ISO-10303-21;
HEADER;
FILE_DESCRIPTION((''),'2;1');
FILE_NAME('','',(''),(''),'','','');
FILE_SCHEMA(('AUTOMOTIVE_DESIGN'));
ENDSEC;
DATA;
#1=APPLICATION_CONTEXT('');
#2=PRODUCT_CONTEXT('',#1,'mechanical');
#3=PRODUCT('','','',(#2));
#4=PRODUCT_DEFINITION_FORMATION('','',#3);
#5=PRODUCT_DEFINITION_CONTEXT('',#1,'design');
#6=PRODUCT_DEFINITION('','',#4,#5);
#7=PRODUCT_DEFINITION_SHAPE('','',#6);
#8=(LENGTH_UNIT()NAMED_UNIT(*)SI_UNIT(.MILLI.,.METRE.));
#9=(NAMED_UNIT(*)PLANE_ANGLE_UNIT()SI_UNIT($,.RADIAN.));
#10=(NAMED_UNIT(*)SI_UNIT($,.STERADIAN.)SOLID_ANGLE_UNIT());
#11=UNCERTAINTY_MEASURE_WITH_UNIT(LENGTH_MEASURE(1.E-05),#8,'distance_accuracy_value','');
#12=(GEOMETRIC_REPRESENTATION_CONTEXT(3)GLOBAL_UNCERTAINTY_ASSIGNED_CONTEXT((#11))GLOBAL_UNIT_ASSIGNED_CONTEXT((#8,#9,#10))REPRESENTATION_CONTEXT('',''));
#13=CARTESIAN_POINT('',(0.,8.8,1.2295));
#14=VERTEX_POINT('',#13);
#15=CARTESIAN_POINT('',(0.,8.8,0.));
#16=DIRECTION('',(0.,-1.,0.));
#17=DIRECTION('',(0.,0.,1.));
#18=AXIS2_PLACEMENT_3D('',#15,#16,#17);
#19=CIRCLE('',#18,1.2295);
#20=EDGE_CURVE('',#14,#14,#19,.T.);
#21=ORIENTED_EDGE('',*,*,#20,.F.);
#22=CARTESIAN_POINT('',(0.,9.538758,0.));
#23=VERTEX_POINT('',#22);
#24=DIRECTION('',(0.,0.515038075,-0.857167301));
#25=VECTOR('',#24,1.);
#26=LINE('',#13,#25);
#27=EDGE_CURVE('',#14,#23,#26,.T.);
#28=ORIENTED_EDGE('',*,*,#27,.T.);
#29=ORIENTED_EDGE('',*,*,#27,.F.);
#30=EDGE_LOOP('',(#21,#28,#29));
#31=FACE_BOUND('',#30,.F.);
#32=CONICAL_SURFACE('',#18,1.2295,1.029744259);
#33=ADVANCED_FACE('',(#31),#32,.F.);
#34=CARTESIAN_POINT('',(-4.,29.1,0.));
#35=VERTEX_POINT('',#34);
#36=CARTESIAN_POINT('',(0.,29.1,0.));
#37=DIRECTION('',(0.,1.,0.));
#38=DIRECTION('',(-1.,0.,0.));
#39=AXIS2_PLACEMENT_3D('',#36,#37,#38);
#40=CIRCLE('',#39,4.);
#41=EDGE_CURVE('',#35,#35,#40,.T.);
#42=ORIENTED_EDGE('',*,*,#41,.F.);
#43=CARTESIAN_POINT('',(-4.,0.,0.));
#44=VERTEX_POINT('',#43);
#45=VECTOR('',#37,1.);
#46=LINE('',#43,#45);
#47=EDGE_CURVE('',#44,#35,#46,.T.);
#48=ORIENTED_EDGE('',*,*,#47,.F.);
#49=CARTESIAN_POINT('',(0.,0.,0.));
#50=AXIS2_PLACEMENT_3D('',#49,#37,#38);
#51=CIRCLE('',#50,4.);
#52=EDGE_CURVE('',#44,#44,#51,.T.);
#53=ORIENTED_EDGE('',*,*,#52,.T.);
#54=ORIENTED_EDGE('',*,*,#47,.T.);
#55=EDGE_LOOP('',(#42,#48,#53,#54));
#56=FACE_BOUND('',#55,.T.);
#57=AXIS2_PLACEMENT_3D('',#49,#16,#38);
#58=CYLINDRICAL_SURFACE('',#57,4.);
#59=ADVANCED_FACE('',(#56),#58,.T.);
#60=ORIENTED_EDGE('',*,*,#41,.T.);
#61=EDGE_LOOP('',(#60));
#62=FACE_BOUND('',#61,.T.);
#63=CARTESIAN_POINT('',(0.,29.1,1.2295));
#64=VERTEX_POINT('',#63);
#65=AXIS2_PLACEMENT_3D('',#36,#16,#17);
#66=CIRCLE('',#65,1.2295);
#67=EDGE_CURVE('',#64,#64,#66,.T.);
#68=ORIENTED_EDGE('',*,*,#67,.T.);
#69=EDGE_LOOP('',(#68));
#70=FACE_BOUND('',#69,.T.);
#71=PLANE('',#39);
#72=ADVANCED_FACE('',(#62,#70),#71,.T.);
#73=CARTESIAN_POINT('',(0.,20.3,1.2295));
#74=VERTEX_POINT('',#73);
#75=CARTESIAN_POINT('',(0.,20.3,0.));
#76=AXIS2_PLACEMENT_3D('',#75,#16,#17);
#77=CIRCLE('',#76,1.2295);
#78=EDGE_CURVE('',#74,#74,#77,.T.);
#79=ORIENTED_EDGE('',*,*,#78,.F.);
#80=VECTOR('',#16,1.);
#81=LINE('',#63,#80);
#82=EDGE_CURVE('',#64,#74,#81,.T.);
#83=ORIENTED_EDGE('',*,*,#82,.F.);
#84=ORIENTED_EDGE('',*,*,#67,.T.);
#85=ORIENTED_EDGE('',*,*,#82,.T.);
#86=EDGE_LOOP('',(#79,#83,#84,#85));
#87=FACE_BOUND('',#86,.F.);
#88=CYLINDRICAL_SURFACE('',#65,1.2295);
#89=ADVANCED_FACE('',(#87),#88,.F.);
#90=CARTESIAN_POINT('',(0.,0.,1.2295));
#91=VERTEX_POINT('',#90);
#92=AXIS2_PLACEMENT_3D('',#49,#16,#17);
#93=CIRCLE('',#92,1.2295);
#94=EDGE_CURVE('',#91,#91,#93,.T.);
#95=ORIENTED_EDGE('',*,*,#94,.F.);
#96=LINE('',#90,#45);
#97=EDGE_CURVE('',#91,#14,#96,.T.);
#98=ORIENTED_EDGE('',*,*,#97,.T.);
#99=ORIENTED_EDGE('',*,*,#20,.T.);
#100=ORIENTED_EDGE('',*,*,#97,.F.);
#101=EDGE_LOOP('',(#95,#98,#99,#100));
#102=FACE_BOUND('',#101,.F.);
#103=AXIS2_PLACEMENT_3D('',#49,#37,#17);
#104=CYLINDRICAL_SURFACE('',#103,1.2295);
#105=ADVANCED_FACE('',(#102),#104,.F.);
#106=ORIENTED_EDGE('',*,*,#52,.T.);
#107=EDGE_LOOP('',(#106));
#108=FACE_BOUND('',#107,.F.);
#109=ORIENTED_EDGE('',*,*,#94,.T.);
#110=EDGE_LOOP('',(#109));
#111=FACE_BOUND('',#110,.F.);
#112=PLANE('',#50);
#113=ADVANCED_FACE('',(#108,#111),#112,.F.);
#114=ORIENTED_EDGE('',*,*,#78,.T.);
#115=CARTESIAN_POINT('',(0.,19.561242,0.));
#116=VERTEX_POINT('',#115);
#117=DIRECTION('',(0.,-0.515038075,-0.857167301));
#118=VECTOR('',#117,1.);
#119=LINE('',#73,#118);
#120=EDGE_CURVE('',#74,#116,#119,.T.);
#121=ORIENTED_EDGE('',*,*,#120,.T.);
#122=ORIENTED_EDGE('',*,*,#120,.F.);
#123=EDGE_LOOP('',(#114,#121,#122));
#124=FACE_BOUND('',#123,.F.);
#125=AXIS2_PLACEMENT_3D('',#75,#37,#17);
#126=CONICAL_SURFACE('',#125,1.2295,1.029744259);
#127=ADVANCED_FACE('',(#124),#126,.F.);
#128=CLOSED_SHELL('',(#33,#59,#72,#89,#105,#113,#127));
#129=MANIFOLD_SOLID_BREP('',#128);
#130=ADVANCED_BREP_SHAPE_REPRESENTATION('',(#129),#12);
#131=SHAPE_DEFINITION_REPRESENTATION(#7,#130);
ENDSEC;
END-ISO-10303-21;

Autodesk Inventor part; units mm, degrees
ref_plane "YZ Plane" through (0, 0, 0) normal (1, 0, 0) x (0, 1, 0)
ref_plane "XZ Plane" through (0, 0, 0) normal (0, 1, 0) x (-1, 0, 0)
sketch "Sketch1" plane through (0, 0, 0) normal (0, 1, 0) x (-1, 0, 0)
  circle A0 centre (0, 0) radius 4
  dimension "d0" = 8
extrude "Extrusion1" add sketch "Sketch1" along normal blind 29.1
sketch "Sketch2" plane through (0, 29.1, 0) normal (0, 1, 0) x (1, 0, 0)
  point P0 (0, 0)
  point P1 (0, 0)
hole "Hole1" at (0, 29.1, 0) direction (0, -1, 0) diameter 2.459 depth 8.8 tip angle 118 thread size "M3x0.5" class "6H" standard "ISO Metric profile"
ref_plane "Work Plane1" through (0, 14.55, 0) normal (0, 1, 0) x (1, 0, 0)
mirror "Mirror1" about plane through (0, 14.55, 0) normal (0, 1, 0) of "Hole1"
properties part number "rod mount motor"
